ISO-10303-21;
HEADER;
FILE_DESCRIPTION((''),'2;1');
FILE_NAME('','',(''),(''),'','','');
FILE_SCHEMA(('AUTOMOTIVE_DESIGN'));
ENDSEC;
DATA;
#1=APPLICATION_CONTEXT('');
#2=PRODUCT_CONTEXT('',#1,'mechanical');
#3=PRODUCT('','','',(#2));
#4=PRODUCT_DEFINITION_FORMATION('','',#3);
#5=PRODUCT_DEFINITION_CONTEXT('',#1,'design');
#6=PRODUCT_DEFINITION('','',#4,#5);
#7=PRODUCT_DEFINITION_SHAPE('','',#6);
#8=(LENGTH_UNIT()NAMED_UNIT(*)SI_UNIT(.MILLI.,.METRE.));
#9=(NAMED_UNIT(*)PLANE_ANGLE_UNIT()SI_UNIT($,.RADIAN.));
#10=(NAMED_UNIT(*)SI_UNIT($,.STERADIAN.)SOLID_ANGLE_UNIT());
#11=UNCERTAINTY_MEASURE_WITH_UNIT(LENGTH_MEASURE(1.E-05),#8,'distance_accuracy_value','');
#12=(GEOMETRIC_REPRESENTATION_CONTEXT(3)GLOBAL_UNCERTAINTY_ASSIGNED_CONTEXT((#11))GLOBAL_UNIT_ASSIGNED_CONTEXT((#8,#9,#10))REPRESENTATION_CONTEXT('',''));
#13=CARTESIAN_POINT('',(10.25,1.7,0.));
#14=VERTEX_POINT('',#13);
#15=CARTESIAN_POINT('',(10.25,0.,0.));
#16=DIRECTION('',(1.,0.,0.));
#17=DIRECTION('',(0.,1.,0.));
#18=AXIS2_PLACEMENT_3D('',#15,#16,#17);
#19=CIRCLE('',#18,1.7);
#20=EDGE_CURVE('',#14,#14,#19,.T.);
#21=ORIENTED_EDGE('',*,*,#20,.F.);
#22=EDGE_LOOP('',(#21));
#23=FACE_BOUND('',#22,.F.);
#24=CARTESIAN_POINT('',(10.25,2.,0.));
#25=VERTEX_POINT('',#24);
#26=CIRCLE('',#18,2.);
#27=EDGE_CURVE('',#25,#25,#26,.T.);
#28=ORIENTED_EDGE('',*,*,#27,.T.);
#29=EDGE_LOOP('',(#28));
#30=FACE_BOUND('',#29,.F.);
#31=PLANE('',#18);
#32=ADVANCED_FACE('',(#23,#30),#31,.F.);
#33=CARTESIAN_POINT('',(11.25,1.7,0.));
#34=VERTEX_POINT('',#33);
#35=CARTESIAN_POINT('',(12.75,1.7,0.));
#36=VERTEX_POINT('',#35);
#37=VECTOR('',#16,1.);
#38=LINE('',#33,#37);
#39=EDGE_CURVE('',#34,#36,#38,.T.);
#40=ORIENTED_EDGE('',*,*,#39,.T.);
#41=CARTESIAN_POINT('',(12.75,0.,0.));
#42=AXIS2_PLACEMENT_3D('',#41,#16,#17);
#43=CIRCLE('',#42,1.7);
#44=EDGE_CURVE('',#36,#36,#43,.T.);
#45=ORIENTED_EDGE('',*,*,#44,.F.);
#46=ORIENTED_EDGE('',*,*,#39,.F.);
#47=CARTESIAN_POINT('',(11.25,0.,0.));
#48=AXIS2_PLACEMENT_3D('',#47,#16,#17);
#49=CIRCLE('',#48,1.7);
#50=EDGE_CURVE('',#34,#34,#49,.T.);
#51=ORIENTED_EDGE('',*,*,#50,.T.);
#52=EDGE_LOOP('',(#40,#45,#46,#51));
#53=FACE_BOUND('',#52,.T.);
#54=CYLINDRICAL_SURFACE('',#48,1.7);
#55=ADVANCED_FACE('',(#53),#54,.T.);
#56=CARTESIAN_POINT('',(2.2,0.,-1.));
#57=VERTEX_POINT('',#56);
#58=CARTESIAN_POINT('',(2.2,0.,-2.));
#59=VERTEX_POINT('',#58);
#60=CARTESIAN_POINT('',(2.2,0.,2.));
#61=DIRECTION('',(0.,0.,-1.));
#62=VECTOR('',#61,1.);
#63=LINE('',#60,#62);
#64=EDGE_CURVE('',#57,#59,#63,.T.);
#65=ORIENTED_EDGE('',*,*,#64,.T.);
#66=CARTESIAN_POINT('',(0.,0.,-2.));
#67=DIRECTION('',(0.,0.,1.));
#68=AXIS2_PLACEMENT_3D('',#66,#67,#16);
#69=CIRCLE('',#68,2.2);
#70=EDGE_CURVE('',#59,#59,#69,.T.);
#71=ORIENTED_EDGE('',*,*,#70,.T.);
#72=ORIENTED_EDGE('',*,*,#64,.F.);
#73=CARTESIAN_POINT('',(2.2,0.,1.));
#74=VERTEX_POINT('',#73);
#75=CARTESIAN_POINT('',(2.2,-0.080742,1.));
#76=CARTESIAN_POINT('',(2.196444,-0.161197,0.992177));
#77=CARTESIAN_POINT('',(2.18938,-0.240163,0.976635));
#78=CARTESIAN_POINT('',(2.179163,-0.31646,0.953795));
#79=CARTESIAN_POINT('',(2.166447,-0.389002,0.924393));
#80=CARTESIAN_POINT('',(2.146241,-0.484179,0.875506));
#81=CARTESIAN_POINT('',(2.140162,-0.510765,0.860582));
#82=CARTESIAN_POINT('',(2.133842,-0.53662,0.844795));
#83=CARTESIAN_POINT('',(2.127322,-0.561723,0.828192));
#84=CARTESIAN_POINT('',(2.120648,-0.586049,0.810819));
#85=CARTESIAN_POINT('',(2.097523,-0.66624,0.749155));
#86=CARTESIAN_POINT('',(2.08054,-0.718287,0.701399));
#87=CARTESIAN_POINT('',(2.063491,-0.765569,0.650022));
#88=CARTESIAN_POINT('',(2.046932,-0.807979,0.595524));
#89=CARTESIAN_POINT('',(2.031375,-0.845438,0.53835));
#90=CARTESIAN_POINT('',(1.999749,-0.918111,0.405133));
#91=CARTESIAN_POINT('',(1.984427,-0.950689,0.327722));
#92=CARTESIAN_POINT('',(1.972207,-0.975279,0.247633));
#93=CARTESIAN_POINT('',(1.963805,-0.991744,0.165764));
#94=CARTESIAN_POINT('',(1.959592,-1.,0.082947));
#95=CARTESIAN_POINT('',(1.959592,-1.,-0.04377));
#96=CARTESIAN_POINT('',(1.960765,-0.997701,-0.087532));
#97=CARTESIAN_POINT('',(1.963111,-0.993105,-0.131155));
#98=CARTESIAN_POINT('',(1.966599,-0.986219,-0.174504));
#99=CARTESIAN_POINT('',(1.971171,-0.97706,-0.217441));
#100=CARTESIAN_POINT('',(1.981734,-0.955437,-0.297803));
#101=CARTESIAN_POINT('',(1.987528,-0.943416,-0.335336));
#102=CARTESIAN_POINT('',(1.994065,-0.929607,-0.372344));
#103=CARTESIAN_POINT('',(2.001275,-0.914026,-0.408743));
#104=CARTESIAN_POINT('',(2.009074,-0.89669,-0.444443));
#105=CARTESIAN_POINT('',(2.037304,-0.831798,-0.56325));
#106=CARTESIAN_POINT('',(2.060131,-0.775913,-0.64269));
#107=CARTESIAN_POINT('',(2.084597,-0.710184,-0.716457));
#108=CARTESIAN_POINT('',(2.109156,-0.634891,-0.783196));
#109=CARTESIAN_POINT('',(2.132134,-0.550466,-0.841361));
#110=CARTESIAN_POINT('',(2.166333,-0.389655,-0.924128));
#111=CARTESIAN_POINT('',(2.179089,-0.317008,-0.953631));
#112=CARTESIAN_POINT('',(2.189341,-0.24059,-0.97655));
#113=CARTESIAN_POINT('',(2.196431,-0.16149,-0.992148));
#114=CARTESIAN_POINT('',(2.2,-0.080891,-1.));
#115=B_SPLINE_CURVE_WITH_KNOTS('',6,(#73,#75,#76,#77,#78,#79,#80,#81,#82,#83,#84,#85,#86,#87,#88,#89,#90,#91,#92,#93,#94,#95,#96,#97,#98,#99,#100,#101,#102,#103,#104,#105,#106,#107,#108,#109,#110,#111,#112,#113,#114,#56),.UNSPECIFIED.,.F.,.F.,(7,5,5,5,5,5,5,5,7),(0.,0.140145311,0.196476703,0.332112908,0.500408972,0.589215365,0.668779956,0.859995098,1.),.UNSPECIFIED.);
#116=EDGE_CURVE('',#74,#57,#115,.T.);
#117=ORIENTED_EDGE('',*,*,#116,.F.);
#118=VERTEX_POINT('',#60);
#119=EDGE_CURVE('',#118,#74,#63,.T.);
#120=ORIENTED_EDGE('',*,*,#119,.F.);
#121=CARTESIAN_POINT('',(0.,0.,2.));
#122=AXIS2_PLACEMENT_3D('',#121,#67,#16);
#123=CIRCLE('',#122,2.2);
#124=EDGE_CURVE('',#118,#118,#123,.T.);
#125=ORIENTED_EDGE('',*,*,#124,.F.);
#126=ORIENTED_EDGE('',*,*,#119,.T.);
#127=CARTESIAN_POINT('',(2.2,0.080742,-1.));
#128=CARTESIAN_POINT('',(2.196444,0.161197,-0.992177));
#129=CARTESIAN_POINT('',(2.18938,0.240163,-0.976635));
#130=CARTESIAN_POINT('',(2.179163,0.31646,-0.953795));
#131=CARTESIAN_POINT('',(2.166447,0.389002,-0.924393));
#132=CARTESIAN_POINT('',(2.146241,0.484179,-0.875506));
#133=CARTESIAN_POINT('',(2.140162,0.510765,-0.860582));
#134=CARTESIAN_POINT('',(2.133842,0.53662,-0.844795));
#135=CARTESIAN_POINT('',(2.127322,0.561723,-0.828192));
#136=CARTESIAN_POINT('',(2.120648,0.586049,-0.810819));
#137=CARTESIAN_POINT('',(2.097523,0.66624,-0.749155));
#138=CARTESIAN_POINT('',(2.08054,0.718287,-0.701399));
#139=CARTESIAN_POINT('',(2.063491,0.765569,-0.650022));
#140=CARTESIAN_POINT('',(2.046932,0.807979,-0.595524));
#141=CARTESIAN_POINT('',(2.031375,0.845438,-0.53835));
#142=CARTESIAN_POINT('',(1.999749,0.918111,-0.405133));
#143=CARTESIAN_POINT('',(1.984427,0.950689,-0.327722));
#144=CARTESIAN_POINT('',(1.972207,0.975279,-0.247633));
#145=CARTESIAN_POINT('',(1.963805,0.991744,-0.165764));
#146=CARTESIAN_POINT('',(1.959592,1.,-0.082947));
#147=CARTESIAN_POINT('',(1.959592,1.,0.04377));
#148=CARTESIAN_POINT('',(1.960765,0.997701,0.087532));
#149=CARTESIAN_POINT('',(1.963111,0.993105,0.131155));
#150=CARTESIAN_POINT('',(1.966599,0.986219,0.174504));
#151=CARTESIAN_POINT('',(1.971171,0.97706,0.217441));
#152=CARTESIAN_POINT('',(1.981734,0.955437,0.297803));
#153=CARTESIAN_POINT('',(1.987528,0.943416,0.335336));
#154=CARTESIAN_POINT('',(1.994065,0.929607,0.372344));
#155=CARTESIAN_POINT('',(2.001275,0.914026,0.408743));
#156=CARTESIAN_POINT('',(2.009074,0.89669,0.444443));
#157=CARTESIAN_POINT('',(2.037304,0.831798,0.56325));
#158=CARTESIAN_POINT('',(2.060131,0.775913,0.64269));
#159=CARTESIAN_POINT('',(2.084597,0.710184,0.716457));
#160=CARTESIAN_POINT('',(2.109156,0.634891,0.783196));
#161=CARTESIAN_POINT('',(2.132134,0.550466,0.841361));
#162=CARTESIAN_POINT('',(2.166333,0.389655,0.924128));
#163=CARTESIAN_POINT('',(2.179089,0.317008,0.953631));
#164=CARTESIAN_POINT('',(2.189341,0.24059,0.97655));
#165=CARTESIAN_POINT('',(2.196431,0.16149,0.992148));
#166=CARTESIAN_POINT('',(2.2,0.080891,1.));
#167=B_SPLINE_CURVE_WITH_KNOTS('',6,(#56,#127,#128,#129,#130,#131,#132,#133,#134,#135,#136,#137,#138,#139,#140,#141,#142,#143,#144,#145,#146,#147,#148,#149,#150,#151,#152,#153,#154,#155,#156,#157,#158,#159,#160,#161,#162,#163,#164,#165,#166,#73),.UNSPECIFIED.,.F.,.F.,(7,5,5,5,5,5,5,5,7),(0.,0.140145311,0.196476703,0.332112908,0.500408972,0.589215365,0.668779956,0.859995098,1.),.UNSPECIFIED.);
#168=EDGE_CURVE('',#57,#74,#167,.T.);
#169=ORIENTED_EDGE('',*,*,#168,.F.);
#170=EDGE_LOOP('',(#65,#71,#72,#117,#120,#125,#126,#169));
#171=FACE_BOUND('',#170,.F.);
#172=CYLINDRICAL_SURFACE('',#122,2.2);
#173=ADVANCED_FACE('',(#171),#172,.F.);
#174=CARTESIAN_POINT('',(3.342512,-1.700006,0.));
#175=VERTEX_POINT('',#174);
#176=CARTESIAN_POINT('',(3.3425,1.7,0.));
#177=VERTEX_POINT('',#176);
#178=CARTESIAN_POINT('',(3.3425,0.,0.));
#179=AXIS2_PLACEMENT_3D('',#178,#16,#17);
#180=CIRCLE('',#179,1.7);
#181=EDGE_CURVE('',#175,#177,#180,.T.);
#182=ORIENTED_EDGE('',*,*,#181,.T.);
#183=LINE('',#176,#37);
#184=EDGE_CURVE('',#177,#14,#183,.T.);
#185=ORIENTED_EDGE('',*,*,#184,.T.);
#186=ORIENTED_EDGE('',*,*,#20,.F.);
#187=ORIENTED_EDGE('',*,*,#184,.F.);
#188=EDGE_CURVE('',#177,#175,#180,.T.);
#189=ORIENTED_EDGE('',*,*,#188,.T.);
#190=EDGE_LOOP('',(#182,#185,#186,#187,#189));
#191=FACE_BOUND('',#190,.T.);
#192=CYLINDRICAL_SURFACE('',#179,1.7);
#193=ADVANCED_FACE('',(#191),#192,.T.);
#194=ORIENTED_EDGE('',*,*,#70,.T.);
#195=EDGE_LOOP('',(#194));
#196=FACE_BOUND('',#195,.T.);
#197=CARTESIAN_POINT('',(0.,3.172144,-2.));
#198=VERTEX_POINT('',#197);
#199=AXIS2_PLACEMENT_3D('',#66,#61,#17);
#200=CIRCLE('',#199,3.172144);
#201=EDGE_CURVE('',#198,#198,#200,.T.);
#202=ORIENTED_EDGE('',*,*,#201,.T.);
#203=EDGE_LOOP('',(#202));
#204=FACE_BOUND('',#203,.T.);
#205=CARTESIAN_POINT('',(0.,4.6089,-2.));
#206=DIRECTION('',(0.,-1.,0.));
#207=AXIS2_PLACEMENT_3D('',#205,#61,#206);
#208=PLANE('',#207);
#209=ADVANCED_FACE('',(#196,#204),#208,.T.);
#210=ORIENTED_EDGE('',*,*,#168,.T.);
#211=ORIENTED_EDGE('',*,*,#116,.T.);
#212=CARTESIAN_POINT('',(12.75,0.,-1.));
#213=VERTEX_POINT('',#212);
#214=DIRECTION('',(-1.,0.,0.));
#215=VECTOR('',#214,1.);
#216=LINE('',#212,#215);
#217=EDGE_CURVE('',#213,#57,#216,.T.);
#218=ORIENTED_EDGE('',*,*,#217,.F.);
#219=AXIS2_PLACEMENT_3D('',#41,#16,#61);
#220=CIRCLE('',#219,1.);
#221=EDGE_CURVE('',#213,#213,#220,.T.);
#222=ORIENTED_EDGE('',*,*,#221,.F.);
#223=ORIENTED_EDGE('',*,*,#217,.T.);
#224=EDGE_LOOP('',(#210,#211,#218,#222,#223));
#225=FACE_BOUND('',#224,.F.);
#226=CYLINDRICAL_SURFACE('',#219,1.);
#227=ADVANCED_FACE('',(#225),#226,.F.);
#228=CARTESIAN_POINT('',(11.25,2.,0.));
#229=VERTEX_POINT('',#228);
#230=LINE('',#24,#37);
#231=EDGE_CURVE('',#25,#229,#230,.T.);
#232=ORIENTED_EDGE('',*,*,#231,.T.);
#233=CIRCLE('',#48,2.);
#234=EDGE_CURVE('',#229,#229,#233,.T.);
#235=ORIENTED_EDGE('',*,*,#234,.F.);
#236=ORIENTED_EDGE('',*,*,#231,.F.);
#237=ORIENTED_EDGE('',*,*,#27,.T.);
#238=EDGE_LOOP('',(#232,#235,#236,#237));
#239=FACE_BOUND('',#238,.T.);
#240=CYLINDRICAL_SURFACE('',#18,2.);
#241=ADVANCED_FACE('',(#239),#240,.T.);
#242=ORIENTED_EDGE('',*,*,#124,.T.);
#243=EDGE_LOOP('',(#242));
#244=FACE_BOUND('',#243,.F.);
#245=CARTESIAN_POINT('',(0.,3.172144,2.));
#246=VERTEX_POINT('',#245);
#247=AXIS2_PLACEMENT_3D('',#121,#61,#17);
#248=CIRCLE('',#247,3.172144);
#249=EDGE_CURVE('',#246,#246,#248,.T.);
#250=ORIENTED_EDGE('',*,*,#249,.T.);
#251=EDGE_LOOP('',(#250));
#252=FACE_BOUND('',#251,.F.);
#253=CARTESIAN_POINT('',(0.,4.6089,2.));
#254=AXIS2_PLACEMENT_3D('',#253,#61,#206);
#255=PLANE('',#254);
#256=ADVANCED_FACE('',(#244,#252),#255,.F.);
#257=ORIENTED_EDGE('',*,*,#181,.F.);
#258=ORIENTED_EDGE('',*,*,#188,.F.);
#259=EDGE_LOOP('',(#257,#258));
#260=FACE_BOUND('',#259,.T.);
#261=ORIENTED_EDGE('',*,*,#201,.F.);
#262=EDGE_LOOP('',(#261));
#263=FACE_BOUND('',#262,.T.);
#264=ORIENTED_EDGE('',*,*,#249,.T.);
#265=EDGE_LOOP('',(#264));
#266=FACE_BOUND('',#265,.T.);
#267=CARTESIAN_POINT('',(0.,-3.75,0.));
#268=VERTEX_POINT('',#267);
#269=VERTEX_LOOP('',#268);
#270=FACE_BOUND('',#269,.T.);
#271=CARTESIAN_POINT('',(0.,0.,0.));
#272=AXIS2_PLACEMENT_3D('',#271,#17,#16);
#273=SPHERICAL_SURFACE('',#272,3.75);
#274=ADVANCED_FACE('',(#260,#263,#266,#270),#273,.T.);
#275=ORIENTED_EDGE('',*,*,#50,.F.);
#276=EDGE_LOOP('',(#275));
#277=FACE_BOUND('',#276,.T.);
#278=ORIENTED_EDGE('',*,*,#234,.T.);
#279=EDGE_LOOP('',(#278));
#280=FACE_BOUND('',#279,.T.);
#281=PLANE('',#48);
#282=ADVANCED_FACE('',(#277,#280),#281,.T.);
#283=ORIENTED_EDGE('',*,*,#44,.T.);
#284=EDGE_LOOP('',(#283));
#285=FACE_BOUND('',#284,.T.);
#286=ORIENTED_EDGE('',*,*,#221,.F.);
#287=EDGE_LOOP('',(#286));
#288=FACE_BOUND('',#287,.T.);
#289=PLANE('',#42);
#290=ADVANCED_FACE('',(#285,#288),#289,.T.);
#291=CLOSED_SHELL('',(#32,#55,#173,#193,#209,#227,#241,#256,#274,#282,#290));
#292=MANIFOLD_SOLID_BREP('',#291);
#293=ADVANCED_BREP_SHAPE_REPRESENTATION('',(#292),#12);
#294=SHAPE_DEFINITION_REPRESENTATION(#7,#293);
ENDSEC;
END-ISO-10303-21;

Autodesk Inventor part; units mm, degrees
ref_plane "YZ Plane" through (0, 0, 0) normal (1, 0, 0) x (0, 1, 0)
ref_plane "XZ Plane" through (0, 0, 0) normal (0, 1, 0) x (-1, 0, 0)
ref_plane "XY Plane" through (0, 0, 0) normal (0, 0, 1) x (1, 0, 0)
sketch "Sketch2" plane through (0, 0, 0) normal (0, 0, 1) x (1, 0, 0)
  arc A0 (0, -3.75) -> (0, 3.75) centre (0, 0) ccw
  line L0 (0, -3.75) -> (0, 3.75)
revolve "Revolution2" add sketch "Sketch2" angle 360 about axis through (0, -3.75, 0) along (0, 1, 0)
sketch "Sketch3" plane through (0, 0, 0) normal (1, 0, 0) x (0, 1, 0)
  line L0 (4.6089, 2) -> (-4.4968, 2)
  line L1 (4.6089, -2) -> (-4.4968, -2)
  line L2 (4.6089, 5.4189) -> (-4.4968, 5.4189)
  line L3 (-4.4968, -5.0685) -> (4.6089, -5.0685)
  line L4 (4.6089, -5.0685) -> (4.6089, -2)
  line L5 (4.6089, 2) -> (4.6089, 5.4189)
  line L6 (-4.4968, 5.4189) -> (-4.4968, 2)
  line L7 (-4.4968, -2) -> (-4.4968, -5.0685)
extrude "Extrusion1" cut sketch "Sketch3" along normal mid plane 10
sketch "Sketch4" plane through (0, 0, 2) normal (0, 0, 1) x (1, 0, 0)
  circle A0 centre (0, 0) radius 2.2
  dimension "d8" = 4.4
extrude "Extrusion2" cut sketch "Sketch4" against normal blind 5
sketch "Sketch5" plane through (0, 0, 0) normal (0, 0, 1) x (1, 0, 0)
  arc A0 (3.75, 0) -> (3.3425, 1.7) centre (0, 0) ccw
  line L0 (3.75, 0) -> (12.75, 0)
  line L1 (12.75, 1.7) -> (12.75, 0)
  line L2 (10.25, 2) -> (11.25, 2)
  line L3 (11.25, 2) -> (11.25, 1.7)
  line L4 (10.25, 2) -> (10.25, 1.7)
  line L5 (3.3425, 1.7) -> (10.25, 1.7)
  line L6 (11.25, 1.7) -> (12.75, 1.7)
revolve "Revolution3" add sketch "Sketch5" angle 360 about axis through (3.75, 0, 0) along (1, 0, 0)
sketch "Sketch6" plane through (12.75, 0, 0) normal (1, 0, 0) x (0, 0, -1)
  circle A0 centre (0, 0) radius 1
  dimension "d17" = 2
extrude "Extrusion3" cut sketch "Sketch6" against normal blind 12
properties part number "fuel_inlet"
